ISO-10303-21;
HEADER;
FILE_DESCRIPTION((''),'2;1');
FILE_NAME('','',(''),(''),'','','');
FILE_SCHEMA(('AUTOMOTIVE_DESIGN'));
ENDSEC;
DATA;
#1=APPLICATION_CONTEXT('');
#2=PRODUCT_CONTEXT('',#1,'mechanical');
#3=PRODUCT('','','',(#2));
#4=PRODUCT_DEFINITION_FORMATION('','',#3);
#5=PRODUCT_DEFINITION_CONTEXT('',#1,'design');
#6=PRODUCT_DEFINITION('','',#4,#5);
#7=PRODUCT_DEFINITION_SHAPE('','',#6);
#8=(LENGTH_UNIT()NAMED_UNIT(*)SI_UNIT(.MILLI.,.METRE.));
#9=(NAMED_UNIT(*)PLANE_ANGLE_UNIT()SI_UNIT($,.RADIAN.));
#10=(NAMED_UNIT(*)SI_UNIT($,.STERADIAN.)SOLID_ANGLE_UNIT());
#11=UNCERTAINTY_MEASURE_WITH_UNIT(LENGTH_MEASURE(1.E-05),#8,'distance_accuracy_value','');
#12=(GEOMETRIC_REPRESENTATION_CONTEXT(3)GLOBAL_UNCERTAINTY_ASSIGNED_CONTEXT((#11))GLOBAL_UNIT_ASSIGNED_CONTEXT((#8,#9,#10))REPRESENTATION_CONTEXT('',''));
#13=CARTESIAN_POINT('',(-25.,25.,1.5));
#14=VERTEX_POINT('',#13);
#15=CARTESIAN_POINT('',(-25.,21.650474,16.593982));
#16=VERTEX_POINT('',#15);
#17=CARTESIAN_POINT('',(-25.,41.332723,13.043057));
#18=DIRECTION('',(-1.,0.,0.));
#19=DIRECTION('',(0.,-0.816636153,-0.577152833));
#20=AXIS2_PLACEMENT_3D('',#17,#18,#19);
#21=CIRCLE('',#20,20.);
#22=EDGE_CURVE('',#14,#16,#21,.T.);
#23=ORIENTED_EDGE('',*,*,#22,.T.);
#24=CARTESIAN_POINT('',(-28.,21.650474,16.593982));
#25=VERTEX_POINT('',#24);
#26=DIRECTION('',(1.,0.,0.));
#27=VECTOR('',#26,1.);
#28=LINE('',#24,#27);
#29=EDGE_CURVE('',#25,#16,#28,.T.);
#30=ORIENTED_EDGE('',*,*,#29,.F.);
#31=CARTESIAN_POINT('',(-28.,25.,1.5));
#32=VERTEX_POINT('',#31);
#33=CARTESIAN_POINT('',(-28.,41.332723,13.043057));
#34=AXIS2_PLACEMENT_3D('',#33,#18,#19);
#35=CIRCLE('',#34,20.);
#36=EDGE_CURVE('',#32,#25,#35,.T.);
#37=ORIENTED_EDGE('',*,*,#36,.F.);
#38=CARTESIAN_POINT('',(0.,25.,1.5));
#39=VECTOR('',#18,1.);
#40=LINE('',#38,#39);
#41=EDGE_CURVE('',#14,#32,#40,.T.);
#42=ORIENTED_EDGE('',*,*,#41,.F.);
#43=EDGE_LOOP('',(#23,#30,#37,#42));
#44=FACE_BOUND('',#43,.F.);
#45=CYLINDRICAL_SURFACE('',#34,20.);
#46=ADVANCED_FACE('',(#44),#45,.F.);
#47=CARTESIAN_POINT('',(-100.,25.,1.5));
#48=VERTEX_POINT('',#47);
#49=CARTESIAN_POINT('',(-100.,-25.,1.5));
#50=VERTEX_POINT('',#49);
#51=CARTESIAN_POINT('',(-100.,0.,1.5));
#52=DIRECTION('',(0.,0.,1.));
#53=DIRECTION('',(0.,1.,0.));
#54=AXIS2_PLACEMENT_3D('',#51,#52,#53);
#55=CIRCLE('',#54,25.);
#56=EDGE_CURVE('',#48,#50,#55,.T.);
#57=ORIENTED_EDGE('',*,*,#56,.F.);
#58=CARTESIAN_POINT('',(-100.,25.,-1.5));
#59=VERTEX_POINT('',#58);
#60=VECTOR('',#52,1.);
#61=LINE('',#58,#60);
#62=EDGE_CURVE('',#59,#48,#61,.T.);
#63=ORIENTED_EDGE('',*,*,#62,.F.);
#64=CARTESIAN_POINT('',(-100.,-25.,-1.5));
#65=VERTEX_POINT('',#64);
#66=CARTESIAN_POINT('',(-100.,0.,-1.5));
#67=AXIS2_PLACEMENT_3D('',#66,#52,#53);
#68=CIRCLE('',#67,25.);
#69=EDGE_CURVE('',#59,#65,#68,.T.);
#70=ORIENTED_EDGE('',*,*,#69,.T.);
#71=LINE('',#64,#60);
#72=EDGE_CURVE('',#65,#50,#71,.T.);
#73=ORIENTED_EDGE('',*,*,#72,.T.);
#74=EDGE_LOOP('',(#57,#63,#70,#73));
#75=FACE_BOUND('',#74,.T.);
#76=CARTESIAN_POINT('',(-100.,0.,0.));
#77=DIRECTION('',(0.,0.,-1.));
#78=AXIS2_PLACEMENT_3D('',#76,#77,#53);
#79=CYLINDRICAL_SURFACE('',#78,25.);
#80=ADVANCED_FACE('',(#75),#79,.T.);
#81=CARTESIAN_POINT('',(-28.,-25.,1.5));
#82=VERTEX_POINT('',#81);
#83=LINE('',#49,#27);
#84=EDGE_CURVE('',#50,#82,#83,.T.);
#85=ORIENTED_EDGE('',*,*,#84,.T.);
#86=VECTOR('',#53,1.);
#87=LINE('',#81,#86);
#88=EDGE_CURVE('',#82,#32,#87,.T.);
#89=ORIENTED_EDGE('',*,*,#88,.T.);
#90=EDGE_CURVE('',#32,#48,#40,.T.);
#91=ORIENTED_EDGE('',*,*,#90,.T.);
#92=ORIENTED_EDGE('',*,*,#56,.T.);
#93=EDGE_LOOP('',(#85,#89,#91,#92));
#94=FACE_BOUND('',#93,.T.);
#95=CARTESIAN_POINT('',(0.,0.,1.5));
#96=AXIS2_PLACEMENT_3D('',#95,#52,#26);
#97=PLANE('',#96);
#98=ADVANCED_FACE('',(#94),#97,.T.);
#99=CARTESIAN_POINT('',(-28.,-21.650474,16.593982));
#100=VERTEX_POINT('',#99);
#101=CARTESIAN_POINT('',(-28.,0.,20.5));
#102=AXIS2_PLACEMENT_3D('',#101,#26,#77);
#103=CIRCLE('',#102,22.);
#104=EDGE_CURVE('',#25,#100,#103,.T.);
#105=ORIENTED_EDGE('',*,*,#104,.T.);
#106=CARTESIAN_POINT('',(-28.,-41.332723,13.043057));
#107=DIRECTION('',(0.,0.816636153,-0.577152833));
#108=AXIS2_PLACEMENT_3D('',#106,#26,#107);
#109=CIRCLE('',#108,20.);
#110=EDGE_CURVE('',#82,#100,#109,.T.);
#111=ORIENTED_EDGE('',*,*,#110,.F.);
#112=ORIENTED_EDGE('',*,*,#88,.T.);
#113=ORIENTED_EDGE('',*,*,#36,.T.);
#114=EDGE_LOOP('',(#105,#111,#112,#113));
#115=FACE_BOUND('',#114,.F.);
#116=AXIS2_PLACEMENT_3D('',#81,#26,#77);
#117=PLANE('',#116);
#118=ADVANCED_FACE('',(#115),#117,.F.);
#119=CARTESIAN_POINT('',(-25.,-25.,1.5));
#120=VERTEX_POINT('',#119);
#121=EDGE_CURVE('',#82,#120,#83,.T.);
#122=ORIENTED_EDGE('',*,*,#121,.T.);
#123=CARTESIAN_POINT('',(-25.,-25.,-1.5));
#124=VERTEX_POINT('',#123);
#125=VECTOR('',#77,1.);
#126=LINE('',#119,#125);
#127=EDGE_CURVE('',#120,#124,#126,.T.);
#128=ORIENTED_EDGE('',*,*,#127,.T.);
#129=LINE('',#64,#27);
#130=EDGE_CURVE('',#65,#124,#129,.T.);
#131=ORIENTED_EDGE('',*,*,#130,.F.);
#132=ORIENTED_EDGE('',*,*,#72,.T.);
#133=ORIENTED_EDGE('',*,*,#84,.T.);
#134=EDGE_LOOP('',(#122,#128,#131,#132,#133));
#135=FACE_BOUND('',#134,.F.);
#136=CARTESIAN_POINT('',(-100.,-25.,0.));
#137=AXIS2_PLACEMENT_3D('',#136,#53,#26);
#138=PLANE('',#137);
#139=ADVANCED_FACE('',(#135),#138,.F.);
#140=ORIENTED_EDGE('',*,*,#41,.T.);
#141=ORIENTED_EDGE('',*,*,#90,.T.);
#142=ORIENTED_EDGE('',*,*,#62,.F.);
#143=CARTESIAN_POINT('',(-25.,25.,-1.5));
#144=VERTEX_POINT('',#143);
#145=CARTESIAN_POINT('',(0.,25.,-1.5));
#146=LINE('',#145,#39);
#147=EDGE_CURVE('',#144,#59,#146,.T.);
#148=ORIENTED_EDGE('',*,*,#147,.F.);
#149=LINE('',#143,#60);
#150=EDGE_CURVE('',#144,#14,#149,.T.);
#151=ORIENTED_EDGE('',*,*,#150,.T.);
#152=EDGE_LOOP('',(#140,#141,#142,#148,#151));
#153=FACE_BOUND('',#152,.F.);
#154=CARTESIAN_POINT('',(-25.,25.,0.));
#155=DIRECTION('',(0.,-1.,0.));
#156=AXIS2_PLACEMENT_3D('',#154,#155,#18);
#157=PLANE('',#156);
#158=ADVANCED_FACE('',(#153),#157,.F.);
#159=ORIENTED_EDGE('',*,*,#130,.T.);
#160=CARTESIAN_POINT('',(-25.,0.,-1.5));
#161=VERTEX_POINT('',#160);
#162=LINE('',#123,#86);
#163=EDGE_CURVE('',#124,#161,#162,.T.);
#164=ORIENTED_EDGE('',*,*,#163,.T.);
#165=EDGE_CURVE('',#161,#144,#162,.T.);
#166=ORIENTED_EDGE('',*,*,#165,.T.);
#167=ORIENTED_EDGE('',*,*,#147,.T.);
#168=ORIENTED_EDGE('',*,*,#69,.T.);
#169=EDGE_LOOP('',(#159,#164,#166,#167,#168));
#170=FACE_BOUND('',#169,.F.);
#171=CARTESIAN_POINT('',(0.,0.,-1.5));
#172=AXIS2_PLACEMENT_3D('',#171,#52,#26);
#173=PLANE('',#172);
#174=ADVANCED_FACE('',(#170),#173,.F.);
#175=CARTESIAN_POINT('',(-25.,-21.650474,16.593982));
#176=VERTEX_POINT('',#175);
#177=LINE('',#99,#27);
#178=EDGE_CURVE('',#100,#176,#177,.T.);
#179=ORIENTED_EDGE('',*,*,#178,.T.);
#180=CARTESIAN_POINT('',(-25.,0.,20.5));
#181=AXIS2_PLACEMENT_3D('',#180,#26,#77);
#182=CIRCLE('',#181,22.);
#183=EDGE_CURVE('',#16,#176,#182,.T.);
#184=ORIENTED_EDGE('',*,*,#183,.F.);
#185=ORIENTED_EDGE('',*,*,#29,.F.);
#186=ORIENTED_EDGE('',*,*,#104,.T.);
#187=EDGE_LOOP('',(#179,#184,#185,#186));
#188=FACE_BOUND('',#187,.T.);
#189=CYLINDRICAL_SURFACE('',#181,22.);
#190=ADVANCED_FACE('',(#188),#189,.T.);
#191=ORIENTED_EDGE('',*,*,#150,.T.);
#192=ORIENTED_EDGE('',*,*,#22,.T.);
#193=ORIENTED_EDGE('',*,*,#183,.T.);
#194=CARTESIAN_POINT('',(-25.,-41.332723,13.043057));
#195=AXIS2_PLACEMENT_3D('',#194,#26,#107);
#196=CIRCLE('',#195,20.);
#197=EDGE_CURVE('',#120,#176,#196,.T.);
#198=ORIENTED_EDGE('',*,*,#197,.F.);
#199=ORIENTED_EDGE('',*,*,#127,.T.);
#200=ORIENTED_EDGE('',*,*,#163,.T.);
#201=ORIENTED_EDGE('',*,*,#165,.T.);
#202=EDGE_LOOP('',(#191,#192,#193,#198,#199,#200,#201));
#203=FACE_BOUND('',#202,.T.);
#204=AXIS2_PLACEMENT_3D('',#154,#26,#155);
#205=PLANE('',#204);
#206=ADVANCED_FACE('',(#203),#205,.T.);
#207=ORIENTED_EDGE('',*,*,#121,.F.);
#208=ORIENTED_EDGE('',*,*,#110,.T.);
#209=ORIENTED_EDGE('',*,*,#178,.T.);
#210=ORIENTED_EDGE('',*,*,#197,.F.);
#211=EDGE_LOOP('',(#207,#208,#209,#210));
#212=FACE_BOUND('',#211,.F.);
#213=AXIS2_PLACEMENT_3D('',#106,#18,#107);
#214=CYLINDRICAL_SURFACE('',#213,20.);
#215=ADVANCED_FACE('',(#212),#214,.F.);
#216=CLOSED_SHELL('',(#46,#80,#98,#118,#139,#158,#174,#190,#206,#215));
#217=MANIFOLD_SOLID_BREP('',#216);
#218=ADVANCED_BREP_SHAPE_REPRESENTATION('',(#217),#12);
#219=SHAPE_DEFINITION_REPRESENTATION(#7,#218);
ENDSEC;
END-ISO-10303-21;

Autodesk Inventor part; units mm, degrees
ref_plane "YZ Plane" through (0, 0, 0) normal (1, 0, 0) x (0, 1, 0)
ref_plane "XZ Plane" through (0, 0, 0) normal (0, 1, 0) x (-1, 0, 0)
ref_plane "XY Plane" through (0, 0, 0) normal (0, 0, 1) x (1, 0, 0)
sketch "草圖1" plane through (0, 0, 0) normal (0, 0, 1) x (1, 0, 0)
  line L0 (0, 0) -> (-100, 0) construction
  line L1 (0, 25) -> (-100, 25)
  line L2 (-100, -25) -> (0, -25)
  arc A0 (0, -25) -> (0, 25) centre (0, 0) ccw
  arc A1 (-100, 25) -> (-100, -25) centre (-100, 0) ccw
  circle A2 centre (0, 0) radius 25
  line L3 (-25, 25) -> (-25, -25)
  point P0 (-50, 0)
  point P1 (25, 0)
  point P2 (-125, 0)
  dimension "d0" = 50
  dimension "d1" = 150
extrude "擠出1" add sketch "草圖1" along normal mid plane 3 contours L3 L2 A1 L1
sketch "草圖2" plane through (-25, -25, 1.5) normal (1, 0, 0) x (0, 0, -1)
  circle A0 centre (-19, 25) radius 22
  line L0 (3, 50) -> (3, 0) construction
  point P0 (1.5, 25)
  point P1 (3, 25)
  dimension "d4" = 44
extrude "擠出2" add sketch "草圖2" against normal blind 3
fillet "圓角1" radius 20 2 edges at (-26.5, 11.0905, 1.5) (-26.5, -11.0905, 1.5)
sketch "草圖3" plane through (0, 0, 1.5) normal (0, 0, 1) x (1, 0, 0)
  line L0 (-94.9774, -1.6071) -> (-72.1571, -1.6071) construction
  line L1 (-72.1571, -1.6071) -> (-72.1571, -15.4278) construction
  line L2 (-72.1571, -15.4278) -> (-94.9774, -15.4278) construction
  line L3 (-94.9774, -15.4278) -> (-94.9774, -1.6071) construction
  point P0 (0, 0)
properties part number "Arm_4"
